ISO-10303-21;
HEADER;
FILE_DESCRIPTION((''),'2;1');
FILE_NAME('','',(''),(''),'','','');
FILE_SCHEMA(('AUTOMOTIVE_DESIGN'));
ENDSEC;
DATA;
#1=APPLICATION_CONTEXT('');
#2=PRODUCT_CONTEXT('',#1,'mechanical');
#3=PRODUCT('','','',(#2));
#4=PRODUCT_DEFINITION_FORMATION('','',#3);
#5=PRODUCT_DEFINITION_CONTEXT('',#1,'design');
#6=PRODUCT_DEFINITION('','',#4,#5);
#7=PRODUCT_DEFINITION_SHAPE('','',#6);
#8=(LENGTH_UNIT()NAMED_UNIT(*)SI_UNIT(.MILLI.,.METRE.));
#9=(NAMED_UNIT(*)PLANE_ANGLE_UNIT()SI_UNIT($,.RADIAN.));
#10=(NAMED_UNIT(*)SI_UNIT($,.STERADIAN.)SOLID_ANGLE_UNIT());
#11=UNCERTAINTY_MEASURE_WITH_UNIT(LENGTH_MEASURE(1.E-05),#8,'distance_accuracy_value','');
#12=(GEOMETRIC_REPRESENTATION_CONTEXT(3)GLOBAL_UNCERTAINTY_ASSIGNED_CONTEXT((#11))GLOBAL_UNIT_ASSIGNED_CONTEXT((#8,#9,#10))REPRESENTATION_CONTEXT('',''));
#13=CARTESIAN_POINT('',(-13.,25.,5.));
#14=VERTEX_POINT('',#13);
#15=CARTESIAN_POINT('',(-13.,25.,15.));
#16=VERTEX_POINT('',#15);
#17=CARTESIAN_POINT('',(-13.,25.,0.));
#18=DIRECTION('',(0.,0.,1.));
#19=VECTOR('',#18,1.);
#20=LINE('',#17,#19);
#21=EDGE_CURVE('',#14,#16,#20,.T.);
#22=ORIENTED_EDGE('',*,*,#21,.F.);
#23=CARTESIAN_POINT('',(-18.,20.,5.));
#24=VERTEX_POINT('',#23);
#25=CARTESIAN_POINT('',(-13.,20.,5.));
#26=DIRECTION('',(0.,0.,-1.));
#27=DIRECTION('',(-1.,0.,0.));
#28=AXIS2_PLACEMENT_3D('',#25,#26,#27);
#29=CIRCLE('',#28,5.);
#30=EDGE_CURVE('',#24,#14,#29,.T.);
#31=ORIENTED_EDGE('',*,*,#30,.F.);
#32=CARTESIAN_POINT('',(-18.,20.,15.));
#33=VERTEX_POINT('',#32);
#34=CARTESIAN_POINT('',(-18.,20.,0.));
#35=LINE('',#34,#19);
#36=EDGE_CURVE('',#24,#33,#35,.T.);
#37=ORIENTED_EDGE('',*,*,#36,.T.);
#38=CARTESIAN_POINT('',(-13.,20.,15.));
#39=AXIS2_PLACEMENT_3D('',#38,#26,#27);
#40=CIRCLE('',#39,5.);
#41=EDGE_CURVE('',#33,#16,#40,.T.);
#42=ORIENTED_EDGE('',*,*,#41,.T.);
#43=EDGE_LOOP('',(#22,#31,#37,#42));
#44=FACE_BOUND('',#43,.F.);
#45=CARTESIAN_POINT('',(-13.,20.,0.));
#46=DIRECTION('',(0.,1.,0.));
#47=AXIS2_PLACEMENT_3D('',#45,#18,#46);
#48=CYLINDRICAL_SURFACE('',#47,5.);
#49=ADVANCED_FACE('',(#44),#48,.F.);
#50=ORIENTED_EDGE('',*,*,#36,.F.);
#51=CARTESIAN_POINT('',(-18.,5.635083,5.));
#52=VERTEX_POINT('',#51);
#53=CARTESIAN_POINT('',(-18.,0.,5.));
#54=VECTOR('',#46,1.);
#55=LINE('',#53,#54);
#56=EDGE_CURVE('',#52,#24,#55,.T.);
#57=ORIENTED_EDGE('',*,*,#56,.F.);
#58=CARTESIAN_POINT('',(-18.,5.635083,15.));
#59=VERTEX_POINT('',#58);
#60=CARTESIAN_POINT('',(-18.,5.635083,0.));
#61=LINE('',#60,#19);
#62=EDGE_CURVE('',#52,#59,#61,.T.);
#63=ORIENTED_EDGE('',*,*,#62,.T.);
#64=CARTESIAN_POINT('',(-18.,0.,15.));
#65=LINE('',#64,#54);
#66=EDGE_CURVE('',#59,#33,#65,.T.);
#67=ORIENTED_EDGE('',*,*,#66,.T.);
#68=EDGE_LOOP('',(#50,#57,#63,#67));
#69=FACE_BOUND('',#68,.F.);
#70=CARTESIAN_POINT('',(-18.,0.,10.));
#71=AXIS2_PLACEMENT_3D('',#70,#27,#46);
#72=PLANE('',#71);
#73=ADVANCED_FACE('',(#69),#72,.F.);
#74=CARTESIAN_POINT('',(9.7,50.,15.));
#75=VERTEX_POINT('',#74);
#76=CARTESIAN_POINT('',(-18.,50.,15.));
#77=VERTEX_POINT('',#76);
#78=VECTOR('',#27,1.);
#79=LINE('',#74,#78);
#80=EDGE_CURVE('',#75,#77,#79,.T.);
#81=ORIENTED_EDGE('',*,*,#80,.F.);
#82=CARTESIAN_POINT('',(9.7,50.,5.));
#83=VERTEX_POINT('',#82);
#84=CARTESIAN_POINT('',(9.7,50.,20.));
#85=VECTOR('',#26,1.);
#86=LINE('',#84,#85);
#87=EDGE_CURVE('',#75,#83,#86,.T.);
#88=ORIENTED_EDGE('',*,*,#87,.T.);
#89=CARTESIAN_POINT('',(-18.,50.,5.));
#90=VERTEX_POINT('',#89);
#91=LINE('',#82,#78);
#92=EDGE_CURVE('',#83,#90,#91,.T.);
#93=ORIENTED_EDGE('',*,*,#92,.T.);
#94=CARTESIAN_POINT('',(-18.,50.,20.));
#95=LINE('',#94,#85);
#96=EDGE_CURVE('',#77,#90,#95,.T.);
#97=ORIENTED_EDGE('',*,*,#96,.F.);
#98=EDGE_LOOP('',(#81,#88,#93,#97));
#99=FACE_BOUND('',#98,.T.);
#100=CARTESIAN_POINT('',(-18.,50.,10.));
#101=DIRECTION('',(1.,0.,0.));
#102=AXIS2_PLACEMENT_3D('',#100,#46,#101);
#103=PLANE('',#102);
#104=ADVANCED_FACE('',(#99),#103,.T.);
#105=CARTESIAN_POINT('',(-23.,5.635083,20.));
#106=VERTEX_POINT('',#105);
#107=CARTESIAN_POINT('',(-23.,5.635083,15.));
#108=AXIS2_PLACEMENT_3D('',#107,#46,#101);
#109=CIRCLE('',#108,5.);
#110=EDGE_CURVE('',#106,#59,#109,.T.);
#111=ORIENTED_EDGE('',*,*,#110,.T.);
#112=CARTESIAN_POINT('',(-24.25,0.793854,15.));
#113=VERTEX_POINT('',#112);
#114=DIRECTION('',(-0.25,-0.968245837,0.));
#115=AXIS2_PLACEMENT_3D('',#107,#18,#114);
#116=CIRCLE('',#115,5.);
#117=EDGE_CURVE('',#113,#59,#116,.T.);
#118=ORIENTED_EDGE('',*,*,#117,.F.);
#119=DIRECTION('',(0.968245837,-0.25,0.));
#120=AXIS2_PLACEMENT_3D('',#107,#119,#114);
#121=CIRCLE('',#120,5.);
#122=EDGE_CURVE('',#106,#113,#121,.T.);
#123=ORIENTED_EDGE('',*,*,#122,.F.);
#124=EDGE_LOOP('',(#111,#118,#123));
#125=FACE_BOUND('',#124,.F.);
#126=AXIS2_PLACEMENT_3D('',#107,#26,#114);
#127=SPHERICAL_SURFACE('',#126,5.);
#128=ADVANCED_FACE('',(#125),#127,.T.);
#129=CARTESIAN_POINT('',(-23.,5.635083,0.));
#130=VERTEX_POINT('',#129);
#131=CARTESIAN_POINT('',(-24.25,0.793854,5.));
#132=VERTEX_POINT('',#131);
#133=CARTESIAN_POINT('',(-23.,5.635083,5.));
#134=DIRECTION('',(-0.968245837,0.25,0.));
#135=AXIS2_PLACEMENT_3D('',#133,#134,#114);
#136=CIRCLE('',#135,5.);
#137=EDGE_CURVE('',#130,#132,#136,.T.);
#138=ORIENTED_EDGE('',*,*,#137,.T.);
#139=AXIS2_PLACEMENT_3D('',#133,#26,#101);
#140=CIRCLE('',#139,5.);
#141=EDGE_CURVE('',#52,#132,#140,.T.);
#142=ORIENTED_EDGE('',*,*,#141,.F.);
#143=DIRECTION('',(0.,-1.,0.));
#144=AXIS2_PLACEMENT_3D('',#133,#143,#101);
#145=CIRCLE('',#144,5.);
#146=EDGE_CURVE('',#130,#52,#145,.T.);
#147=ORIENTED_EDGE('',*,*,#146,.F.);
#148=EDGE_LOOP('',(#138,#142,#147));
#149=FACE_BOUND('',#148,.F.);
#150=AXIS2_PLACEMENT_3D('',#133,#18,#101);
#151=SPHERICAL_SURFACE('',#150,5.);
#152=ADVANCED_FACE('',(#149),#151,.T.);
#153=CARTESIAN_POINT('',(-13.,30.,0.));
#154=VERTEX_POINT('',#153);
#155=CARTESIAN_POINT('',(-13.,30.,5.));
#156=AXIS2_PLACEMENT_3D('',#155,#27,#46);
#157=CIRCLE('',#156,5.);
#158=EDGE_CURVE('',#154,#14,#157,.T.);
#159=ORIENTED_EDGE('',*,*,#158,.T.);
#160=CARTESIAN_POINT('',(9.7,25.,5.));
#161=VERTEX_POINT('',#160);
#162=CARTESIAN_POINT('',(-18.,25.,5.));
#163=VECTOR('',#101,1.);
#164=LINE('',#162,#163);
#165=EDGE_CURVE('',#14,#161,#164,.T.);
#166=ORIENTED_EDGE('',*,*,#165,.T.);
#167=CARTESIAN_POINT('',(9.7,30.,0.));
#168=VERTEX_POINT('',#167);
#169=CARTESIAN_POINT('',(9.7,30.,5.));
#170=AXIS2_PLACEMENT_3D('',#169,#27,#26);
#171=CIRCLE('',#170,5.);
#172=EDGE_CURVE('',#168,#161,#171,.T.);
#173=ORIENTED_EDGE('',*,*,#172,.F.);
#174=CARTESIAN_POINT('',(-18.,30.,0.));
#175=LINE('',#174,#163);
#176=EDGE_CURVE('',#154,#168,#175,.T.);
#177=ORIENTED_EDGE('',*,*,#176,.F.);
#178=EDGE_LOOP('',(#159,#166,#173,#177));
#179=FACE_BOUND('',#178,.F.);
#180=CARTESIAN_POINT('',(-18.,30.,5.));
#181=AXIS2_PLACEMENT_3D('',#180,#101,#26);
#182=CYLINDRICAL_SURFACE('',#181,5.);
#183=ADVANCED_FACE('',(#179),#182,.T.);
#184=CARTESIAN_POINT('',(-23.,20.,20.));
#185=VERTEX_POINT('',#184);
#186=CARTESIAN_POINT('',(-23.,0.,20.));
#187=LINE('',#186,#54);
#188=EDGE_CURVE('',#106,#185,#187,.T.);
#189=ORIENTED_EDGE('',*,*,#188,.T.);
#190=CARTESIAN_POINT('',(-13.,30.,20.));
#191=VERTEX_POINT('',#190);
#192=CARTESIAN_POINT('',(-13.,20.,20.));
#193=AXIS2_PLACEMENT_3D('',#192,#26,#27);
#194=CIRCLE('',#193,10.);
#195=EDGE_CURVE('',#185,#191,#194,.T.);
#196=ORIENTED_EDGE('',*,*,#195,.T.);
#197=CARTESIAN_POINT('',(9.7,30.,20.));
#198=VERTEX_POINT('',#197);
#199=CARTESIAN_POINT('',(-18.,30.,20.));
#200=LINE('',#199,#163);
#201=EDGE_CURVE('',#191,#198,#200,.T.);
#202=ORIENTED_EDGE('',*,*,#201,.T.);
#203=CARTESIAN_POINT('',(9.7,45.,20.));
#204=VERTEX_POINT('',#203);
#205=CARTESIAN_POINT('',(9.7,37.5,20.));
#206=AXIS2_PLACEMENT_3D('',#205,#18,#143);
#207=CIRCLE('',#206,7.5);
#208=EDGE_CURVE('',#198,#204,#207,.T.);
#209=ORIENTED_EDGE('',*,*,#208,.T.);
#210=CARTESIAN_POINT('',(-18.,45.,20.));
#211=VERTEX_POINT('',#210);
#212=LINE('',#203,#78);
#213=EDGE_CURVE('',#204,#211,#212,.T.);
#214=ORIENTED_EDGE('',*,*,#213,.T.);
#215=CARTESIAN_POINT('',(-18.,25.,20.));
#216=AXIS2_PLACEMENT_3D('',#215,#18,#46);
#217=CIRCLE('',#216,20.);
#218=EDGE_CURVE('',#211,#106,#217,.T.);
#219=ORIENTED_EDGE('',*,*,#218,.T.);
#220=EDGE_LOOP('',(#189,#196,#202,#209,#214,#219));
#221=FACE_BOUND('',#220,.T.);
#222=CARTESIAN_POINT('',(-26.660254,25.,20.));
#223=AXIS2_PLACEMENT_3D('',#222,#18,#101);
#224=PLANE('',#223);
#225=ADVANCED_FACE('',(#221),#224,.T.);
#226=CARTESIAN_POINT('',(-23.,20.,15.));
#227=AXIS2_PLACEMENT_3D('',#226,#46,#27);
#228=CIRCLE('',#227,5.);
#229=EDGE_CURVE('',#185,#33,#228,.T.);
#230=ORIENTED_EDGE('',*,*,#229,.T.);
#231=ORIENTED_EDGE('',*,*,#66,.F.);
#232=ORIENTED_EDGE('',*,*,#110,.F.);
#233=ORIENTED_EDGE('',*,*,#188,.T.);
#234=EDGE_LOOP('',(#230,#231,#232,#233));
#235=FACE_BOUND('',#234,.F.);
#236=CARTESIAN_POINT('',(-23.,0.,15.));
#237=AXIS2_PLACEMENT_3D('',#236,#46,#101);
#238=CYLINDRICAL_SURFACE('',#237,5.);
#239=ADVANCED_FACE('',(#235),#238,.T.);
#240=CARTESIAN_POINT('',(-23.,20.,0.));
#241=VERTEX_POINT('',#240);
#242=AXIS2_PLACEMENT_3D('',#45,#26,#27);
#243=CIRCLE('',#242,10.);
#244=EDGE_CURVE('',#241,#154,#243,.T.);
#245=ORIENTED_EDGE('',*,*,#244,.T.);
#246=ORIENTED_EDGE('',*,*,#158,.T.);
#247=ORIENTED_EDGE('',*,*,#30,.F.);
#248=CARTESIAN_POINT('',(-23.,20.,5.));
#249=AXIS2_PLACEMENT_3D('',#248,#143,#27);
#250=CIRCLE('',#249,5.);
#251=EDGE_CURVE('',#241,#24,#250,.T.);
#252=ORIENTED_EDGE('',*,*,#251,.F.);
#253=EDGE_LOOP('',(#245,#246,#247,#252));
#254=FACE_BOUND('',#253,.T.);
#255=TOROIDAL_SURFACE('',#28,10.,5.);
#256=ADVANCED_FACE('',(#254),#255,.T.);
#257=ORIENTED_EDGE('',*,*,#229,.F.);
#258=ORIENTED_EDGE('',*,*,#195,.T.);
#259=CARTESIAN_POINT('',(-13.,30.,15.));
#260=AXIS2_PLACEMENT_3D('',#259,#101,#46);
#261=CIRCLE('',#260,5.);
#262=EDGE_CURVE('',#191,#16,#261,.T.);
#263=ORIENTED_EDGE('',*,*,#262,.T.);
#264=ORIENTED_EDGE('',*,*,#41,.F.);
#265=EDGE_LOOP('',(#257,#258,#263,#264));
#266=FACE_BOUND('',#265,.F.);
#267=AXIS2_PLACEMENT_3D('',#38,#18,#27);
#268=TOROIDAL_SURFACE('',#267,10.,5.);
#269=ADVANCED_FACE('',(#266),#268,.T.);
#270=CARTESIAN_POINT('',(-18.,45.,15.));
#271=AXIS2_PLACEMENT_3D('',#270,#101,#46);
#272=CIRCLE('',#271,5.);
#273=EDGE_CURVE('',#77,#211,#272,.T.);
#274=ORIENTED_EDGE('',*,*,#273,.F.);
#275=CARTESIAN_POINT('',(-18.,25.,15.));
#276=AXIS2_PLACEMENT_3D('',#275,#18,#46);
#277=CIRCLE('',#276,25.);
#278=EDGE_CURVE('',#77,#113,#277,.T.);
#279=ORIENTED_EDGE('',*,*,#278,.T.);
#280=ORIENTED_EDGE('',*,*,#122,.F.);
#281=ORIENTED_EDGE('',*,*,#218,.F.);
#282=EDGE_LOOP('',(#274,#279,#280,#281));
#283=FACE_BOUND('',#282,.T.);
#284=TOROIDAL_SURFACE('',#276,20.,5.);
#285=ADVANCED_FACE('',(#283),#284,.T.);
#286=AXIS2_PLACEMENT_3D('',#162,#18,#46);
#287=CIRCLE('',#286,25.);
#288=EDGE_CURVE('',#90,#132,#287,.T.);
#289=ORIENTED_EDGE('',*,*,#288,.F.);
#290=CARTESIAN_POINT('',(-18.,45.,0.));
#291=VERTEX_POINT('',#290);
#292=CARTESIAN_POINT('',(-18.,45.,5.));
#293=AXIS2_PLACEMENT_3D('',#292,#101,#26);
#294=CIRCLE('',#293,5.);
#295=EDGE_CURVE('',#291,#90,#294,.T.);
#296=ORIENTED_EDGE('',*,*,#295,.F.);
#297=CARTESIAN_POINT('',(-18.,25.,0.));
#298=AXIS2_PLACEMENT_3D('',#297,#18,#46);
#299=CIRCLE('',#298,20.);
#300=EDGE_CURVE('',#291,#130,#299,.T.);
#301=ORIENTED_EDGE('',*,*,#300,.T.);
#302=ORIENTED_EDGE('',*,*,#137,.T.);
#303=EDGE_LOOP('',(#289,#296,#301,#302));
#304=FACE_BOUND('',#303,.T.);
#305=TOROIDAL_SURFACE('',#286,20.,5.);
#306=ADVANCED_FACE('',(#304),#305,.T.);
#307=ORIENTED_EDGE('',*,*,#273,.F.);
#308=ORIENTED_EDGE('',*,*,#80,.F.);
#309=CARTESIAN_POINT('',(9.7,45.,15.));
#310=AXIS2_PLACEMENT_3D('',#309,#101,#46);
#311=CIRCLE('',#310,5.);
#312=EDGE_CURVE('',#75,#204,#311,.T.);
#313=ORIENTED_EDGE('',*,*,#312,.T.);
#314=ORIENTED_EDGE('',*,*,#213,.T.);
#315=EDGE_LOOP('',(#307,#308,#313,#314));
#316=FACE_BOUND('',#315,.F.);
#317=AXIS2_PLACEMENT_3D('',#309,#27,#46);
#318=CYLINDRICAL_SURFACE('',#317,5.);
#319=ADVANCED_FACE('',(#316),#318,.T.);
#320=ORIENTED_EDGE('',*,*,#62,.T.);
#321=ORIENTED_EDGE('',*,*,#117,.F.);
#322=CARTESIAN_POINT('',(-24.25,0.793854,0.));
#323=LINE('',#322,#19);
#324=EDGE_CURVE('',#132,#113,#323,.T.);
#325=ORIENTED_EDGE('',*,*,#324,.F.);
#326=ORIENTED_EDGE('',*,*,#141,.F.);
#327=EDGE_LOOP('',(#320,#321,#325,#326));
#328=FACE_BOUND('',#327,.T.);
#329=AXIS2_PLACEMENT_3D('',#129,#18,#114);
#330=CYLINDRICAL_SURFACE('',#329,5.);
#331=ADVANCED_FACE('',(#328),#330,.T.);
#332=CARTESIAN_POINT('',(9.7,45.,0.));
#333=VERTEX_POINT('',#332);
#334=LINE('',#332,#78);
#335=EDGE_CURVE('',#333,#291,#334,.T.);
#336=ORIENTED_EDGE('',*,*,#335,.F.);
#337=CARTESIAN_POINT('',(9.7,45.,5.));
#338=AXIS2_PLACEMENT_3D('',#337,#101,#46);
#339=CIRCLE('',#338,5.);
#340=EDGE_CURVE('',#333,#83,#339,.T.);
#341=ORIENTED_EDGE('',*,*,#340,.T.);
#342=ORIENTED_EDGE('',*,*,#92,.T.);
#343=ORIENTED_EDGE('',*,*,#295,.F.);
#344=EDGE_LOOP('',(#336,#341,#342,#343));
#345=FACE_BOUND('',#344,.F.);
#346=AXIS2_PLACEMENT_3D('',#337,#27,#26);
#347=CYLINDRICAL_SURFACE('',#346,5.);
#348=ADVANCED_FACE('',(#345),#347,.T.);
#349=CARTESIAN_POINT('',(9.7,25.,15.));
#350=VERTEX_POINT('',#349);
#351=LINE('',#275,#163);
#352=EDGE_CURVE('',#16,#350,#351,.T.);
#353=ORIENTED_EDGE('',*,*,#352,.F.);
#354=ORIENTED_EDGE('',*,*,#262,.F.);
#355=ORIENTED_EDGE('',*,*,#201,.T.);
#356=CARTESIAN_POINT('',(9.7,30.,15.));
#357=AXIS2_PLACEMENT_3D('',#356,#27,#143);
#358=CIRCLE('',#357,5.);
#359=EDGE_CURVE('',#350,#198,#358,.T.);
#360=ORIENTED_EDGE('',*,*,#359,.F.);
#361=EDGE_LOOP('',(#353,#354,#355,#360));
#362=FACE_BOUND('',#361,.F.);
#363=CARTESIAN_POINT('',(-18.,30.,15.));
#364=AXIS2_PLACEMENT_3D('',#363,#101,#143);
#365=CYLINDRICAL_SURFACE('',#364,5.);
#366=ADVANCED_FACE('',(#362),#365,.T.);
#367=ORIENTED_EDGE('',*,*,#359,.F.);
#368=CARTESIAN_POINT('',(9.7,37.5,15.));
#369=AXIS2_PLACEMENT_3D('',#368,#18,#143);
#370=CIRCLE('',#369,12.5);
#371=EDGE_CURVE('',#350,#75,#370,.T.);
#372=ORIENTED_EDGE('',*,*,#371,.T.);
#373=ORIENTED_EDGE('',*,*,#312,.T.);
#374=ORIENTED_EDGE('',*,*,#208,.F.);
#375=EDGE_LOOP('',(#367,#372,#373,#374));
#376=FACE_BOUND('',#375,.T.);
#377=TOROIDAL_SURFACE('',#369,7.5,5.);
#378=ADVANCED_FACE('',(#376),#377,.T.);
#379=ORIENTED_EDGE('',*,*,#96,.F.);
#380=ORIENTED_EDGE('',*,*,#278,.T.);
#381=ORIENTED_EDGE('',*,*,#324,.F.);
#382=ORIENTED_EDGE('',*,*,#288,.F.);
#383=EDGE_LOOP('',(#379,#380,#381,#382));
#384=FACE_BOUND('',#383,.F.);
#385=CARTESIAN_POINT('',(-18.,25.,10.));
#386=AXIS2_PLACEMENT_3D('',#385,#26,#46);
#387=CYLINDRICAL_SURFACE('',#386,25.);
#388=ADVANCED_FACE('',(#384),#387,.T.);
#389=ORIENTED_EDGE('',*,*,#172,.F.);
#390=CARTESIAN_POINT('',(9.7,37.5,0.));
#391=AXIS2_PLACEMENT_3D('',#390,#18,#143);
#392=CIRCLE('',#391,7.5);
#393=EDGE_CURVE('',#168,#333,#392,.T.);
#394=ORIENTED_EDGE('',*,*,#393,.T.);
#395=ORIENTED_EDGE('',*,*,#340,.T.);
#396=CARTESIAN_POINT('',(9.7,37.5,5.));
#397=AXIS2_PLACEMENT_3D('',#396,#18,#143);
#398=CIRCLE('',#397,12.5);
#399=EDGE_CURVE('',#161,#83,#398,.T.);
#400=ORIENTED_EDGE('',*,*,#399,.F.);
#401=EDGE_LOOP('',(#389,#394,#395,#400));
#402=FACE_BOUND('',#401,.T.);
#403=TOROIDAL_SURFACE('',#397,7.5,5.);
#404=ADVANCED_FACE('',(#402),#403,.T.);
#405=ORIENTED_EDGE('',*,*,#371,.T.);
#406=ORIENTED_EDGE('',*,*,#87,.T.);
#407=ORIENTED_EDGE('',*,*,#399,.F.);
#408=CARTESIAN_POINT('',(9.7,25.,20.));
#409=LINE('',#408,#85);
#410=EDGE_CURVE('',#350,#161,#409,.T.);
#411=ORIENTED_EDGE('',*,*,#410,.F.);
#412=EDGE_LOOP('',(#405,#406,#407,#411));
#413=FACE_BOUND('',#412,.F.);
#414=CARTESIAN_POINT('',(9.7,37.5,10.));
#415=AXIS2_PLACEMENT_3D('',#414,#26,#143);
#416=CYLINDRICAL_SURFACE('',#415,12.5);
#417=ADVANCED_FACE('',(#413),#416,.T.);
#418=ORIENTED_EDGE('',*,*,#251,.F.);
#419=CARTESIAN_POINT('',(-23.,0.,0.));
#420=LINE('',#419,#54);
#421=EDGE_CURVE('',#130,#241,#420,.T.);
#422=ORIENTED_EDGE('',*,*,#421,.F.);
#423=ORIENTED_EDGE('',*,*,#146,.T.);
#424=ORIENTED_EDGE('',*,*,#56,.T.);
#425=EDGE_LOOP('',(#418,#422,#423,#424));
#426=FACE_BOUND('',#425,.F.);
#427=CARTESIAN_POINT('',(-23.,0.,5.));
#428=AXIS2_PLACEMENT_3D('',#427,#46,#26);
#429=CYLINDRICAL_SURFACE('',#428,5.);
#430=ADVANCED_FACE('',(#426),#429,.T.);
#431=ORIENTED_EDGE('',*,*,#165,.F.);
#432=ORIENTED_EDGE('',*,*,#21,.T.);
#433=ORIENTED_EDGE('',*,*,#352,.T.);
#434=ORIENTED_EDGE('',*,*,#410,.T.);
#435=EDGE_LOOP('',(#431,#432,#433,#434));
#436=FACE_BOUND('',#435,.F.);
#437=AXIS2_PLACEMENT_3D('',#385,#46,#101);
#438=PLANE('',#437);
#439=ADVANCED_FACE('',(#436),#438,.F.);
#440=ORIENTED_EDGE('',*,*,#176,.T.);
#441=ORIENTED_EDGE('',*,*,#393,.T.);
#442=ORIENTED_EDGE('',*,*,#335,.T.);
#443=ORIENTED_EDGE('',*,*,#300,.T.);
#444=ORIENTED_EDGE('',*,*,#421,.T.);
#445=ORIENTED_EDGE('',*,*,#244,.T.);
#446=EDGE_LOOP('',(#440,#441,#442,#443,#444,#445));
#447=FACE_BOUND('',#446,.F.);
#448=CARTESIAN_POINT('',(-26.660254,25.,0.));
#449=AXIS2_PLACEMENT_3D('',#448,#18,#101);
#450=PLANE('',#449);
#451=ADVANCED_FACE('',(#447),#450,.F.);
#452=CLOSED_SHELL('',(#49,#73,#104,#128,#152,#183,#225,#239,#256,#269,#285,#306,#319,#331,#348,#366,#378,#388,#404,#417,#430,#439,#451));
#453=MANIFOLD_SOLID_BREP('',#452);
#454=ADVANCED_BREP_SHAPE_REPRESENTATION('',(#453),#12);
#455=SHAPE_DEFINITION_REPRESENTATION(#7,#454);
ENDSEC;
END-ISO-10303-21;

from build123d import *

# Parameters (mm, degrees)
F0_W     = 27.7
F0_H     = 25
F1_DEPTH = 10
F2_DEPTH = 10
F3_R     = 5


# Not quite as in the source:
# - a feature names something its author has since deleted; it is built from what else it names


with BuildPart() as f1:
    # F0 (on Top) → F1 (new body)
    with BuildSketch(Plane.XY):
        with BuildLine():
            Line((-18, 25), (-18, 50))
            ThreePointArc((-18, 50), (-43, 25), (-18, 0))
            Line((-18, 0), (-18, 25))
        make_face()
        with BuildLine():
            ThreePointArc((9.7, 25), (22.2, 37.5), (9.7, 50))
            Line((9.7, 50), (9.7, 25))
        make_face()
        with Locations((-4.15, 37.5)):
            Rectangle(F0_W, F0_H)
    extrude(amount=F1_DEPTH)

    # F2 (add): a face of the model
    f2_faces = [f1.faces().sort_by_distance(p)[0] for p in [
        (-14.2102397427, 31.107363361, 10),
    ]]
    extrude(f2_faces, amount=F2_DEPTH)

    # F3
    f3_edges = [f1.edges().sort_by_distance(p)[0] for p in [
        (-4.15, 25, 20),
        (9.7, 25, 10),
        (-4.15, 25, 0),
        (-18, 25, 10),
        (-4.15, 50, 20),
        (22.2, 37.5, 20),
        (-43, 25, 20),
        (-18, 12.5, 20),
        (-18, 50, 10),
        (-18, 0, 10),
        (-43, 25, 0),
        (-18, 12.5, 0),
        (22.2, 37.5, 0),
        (-4.15, 50, 0),
    ]]
    fillet(f3_edges, radius=F3_R)


solid = f1.part
